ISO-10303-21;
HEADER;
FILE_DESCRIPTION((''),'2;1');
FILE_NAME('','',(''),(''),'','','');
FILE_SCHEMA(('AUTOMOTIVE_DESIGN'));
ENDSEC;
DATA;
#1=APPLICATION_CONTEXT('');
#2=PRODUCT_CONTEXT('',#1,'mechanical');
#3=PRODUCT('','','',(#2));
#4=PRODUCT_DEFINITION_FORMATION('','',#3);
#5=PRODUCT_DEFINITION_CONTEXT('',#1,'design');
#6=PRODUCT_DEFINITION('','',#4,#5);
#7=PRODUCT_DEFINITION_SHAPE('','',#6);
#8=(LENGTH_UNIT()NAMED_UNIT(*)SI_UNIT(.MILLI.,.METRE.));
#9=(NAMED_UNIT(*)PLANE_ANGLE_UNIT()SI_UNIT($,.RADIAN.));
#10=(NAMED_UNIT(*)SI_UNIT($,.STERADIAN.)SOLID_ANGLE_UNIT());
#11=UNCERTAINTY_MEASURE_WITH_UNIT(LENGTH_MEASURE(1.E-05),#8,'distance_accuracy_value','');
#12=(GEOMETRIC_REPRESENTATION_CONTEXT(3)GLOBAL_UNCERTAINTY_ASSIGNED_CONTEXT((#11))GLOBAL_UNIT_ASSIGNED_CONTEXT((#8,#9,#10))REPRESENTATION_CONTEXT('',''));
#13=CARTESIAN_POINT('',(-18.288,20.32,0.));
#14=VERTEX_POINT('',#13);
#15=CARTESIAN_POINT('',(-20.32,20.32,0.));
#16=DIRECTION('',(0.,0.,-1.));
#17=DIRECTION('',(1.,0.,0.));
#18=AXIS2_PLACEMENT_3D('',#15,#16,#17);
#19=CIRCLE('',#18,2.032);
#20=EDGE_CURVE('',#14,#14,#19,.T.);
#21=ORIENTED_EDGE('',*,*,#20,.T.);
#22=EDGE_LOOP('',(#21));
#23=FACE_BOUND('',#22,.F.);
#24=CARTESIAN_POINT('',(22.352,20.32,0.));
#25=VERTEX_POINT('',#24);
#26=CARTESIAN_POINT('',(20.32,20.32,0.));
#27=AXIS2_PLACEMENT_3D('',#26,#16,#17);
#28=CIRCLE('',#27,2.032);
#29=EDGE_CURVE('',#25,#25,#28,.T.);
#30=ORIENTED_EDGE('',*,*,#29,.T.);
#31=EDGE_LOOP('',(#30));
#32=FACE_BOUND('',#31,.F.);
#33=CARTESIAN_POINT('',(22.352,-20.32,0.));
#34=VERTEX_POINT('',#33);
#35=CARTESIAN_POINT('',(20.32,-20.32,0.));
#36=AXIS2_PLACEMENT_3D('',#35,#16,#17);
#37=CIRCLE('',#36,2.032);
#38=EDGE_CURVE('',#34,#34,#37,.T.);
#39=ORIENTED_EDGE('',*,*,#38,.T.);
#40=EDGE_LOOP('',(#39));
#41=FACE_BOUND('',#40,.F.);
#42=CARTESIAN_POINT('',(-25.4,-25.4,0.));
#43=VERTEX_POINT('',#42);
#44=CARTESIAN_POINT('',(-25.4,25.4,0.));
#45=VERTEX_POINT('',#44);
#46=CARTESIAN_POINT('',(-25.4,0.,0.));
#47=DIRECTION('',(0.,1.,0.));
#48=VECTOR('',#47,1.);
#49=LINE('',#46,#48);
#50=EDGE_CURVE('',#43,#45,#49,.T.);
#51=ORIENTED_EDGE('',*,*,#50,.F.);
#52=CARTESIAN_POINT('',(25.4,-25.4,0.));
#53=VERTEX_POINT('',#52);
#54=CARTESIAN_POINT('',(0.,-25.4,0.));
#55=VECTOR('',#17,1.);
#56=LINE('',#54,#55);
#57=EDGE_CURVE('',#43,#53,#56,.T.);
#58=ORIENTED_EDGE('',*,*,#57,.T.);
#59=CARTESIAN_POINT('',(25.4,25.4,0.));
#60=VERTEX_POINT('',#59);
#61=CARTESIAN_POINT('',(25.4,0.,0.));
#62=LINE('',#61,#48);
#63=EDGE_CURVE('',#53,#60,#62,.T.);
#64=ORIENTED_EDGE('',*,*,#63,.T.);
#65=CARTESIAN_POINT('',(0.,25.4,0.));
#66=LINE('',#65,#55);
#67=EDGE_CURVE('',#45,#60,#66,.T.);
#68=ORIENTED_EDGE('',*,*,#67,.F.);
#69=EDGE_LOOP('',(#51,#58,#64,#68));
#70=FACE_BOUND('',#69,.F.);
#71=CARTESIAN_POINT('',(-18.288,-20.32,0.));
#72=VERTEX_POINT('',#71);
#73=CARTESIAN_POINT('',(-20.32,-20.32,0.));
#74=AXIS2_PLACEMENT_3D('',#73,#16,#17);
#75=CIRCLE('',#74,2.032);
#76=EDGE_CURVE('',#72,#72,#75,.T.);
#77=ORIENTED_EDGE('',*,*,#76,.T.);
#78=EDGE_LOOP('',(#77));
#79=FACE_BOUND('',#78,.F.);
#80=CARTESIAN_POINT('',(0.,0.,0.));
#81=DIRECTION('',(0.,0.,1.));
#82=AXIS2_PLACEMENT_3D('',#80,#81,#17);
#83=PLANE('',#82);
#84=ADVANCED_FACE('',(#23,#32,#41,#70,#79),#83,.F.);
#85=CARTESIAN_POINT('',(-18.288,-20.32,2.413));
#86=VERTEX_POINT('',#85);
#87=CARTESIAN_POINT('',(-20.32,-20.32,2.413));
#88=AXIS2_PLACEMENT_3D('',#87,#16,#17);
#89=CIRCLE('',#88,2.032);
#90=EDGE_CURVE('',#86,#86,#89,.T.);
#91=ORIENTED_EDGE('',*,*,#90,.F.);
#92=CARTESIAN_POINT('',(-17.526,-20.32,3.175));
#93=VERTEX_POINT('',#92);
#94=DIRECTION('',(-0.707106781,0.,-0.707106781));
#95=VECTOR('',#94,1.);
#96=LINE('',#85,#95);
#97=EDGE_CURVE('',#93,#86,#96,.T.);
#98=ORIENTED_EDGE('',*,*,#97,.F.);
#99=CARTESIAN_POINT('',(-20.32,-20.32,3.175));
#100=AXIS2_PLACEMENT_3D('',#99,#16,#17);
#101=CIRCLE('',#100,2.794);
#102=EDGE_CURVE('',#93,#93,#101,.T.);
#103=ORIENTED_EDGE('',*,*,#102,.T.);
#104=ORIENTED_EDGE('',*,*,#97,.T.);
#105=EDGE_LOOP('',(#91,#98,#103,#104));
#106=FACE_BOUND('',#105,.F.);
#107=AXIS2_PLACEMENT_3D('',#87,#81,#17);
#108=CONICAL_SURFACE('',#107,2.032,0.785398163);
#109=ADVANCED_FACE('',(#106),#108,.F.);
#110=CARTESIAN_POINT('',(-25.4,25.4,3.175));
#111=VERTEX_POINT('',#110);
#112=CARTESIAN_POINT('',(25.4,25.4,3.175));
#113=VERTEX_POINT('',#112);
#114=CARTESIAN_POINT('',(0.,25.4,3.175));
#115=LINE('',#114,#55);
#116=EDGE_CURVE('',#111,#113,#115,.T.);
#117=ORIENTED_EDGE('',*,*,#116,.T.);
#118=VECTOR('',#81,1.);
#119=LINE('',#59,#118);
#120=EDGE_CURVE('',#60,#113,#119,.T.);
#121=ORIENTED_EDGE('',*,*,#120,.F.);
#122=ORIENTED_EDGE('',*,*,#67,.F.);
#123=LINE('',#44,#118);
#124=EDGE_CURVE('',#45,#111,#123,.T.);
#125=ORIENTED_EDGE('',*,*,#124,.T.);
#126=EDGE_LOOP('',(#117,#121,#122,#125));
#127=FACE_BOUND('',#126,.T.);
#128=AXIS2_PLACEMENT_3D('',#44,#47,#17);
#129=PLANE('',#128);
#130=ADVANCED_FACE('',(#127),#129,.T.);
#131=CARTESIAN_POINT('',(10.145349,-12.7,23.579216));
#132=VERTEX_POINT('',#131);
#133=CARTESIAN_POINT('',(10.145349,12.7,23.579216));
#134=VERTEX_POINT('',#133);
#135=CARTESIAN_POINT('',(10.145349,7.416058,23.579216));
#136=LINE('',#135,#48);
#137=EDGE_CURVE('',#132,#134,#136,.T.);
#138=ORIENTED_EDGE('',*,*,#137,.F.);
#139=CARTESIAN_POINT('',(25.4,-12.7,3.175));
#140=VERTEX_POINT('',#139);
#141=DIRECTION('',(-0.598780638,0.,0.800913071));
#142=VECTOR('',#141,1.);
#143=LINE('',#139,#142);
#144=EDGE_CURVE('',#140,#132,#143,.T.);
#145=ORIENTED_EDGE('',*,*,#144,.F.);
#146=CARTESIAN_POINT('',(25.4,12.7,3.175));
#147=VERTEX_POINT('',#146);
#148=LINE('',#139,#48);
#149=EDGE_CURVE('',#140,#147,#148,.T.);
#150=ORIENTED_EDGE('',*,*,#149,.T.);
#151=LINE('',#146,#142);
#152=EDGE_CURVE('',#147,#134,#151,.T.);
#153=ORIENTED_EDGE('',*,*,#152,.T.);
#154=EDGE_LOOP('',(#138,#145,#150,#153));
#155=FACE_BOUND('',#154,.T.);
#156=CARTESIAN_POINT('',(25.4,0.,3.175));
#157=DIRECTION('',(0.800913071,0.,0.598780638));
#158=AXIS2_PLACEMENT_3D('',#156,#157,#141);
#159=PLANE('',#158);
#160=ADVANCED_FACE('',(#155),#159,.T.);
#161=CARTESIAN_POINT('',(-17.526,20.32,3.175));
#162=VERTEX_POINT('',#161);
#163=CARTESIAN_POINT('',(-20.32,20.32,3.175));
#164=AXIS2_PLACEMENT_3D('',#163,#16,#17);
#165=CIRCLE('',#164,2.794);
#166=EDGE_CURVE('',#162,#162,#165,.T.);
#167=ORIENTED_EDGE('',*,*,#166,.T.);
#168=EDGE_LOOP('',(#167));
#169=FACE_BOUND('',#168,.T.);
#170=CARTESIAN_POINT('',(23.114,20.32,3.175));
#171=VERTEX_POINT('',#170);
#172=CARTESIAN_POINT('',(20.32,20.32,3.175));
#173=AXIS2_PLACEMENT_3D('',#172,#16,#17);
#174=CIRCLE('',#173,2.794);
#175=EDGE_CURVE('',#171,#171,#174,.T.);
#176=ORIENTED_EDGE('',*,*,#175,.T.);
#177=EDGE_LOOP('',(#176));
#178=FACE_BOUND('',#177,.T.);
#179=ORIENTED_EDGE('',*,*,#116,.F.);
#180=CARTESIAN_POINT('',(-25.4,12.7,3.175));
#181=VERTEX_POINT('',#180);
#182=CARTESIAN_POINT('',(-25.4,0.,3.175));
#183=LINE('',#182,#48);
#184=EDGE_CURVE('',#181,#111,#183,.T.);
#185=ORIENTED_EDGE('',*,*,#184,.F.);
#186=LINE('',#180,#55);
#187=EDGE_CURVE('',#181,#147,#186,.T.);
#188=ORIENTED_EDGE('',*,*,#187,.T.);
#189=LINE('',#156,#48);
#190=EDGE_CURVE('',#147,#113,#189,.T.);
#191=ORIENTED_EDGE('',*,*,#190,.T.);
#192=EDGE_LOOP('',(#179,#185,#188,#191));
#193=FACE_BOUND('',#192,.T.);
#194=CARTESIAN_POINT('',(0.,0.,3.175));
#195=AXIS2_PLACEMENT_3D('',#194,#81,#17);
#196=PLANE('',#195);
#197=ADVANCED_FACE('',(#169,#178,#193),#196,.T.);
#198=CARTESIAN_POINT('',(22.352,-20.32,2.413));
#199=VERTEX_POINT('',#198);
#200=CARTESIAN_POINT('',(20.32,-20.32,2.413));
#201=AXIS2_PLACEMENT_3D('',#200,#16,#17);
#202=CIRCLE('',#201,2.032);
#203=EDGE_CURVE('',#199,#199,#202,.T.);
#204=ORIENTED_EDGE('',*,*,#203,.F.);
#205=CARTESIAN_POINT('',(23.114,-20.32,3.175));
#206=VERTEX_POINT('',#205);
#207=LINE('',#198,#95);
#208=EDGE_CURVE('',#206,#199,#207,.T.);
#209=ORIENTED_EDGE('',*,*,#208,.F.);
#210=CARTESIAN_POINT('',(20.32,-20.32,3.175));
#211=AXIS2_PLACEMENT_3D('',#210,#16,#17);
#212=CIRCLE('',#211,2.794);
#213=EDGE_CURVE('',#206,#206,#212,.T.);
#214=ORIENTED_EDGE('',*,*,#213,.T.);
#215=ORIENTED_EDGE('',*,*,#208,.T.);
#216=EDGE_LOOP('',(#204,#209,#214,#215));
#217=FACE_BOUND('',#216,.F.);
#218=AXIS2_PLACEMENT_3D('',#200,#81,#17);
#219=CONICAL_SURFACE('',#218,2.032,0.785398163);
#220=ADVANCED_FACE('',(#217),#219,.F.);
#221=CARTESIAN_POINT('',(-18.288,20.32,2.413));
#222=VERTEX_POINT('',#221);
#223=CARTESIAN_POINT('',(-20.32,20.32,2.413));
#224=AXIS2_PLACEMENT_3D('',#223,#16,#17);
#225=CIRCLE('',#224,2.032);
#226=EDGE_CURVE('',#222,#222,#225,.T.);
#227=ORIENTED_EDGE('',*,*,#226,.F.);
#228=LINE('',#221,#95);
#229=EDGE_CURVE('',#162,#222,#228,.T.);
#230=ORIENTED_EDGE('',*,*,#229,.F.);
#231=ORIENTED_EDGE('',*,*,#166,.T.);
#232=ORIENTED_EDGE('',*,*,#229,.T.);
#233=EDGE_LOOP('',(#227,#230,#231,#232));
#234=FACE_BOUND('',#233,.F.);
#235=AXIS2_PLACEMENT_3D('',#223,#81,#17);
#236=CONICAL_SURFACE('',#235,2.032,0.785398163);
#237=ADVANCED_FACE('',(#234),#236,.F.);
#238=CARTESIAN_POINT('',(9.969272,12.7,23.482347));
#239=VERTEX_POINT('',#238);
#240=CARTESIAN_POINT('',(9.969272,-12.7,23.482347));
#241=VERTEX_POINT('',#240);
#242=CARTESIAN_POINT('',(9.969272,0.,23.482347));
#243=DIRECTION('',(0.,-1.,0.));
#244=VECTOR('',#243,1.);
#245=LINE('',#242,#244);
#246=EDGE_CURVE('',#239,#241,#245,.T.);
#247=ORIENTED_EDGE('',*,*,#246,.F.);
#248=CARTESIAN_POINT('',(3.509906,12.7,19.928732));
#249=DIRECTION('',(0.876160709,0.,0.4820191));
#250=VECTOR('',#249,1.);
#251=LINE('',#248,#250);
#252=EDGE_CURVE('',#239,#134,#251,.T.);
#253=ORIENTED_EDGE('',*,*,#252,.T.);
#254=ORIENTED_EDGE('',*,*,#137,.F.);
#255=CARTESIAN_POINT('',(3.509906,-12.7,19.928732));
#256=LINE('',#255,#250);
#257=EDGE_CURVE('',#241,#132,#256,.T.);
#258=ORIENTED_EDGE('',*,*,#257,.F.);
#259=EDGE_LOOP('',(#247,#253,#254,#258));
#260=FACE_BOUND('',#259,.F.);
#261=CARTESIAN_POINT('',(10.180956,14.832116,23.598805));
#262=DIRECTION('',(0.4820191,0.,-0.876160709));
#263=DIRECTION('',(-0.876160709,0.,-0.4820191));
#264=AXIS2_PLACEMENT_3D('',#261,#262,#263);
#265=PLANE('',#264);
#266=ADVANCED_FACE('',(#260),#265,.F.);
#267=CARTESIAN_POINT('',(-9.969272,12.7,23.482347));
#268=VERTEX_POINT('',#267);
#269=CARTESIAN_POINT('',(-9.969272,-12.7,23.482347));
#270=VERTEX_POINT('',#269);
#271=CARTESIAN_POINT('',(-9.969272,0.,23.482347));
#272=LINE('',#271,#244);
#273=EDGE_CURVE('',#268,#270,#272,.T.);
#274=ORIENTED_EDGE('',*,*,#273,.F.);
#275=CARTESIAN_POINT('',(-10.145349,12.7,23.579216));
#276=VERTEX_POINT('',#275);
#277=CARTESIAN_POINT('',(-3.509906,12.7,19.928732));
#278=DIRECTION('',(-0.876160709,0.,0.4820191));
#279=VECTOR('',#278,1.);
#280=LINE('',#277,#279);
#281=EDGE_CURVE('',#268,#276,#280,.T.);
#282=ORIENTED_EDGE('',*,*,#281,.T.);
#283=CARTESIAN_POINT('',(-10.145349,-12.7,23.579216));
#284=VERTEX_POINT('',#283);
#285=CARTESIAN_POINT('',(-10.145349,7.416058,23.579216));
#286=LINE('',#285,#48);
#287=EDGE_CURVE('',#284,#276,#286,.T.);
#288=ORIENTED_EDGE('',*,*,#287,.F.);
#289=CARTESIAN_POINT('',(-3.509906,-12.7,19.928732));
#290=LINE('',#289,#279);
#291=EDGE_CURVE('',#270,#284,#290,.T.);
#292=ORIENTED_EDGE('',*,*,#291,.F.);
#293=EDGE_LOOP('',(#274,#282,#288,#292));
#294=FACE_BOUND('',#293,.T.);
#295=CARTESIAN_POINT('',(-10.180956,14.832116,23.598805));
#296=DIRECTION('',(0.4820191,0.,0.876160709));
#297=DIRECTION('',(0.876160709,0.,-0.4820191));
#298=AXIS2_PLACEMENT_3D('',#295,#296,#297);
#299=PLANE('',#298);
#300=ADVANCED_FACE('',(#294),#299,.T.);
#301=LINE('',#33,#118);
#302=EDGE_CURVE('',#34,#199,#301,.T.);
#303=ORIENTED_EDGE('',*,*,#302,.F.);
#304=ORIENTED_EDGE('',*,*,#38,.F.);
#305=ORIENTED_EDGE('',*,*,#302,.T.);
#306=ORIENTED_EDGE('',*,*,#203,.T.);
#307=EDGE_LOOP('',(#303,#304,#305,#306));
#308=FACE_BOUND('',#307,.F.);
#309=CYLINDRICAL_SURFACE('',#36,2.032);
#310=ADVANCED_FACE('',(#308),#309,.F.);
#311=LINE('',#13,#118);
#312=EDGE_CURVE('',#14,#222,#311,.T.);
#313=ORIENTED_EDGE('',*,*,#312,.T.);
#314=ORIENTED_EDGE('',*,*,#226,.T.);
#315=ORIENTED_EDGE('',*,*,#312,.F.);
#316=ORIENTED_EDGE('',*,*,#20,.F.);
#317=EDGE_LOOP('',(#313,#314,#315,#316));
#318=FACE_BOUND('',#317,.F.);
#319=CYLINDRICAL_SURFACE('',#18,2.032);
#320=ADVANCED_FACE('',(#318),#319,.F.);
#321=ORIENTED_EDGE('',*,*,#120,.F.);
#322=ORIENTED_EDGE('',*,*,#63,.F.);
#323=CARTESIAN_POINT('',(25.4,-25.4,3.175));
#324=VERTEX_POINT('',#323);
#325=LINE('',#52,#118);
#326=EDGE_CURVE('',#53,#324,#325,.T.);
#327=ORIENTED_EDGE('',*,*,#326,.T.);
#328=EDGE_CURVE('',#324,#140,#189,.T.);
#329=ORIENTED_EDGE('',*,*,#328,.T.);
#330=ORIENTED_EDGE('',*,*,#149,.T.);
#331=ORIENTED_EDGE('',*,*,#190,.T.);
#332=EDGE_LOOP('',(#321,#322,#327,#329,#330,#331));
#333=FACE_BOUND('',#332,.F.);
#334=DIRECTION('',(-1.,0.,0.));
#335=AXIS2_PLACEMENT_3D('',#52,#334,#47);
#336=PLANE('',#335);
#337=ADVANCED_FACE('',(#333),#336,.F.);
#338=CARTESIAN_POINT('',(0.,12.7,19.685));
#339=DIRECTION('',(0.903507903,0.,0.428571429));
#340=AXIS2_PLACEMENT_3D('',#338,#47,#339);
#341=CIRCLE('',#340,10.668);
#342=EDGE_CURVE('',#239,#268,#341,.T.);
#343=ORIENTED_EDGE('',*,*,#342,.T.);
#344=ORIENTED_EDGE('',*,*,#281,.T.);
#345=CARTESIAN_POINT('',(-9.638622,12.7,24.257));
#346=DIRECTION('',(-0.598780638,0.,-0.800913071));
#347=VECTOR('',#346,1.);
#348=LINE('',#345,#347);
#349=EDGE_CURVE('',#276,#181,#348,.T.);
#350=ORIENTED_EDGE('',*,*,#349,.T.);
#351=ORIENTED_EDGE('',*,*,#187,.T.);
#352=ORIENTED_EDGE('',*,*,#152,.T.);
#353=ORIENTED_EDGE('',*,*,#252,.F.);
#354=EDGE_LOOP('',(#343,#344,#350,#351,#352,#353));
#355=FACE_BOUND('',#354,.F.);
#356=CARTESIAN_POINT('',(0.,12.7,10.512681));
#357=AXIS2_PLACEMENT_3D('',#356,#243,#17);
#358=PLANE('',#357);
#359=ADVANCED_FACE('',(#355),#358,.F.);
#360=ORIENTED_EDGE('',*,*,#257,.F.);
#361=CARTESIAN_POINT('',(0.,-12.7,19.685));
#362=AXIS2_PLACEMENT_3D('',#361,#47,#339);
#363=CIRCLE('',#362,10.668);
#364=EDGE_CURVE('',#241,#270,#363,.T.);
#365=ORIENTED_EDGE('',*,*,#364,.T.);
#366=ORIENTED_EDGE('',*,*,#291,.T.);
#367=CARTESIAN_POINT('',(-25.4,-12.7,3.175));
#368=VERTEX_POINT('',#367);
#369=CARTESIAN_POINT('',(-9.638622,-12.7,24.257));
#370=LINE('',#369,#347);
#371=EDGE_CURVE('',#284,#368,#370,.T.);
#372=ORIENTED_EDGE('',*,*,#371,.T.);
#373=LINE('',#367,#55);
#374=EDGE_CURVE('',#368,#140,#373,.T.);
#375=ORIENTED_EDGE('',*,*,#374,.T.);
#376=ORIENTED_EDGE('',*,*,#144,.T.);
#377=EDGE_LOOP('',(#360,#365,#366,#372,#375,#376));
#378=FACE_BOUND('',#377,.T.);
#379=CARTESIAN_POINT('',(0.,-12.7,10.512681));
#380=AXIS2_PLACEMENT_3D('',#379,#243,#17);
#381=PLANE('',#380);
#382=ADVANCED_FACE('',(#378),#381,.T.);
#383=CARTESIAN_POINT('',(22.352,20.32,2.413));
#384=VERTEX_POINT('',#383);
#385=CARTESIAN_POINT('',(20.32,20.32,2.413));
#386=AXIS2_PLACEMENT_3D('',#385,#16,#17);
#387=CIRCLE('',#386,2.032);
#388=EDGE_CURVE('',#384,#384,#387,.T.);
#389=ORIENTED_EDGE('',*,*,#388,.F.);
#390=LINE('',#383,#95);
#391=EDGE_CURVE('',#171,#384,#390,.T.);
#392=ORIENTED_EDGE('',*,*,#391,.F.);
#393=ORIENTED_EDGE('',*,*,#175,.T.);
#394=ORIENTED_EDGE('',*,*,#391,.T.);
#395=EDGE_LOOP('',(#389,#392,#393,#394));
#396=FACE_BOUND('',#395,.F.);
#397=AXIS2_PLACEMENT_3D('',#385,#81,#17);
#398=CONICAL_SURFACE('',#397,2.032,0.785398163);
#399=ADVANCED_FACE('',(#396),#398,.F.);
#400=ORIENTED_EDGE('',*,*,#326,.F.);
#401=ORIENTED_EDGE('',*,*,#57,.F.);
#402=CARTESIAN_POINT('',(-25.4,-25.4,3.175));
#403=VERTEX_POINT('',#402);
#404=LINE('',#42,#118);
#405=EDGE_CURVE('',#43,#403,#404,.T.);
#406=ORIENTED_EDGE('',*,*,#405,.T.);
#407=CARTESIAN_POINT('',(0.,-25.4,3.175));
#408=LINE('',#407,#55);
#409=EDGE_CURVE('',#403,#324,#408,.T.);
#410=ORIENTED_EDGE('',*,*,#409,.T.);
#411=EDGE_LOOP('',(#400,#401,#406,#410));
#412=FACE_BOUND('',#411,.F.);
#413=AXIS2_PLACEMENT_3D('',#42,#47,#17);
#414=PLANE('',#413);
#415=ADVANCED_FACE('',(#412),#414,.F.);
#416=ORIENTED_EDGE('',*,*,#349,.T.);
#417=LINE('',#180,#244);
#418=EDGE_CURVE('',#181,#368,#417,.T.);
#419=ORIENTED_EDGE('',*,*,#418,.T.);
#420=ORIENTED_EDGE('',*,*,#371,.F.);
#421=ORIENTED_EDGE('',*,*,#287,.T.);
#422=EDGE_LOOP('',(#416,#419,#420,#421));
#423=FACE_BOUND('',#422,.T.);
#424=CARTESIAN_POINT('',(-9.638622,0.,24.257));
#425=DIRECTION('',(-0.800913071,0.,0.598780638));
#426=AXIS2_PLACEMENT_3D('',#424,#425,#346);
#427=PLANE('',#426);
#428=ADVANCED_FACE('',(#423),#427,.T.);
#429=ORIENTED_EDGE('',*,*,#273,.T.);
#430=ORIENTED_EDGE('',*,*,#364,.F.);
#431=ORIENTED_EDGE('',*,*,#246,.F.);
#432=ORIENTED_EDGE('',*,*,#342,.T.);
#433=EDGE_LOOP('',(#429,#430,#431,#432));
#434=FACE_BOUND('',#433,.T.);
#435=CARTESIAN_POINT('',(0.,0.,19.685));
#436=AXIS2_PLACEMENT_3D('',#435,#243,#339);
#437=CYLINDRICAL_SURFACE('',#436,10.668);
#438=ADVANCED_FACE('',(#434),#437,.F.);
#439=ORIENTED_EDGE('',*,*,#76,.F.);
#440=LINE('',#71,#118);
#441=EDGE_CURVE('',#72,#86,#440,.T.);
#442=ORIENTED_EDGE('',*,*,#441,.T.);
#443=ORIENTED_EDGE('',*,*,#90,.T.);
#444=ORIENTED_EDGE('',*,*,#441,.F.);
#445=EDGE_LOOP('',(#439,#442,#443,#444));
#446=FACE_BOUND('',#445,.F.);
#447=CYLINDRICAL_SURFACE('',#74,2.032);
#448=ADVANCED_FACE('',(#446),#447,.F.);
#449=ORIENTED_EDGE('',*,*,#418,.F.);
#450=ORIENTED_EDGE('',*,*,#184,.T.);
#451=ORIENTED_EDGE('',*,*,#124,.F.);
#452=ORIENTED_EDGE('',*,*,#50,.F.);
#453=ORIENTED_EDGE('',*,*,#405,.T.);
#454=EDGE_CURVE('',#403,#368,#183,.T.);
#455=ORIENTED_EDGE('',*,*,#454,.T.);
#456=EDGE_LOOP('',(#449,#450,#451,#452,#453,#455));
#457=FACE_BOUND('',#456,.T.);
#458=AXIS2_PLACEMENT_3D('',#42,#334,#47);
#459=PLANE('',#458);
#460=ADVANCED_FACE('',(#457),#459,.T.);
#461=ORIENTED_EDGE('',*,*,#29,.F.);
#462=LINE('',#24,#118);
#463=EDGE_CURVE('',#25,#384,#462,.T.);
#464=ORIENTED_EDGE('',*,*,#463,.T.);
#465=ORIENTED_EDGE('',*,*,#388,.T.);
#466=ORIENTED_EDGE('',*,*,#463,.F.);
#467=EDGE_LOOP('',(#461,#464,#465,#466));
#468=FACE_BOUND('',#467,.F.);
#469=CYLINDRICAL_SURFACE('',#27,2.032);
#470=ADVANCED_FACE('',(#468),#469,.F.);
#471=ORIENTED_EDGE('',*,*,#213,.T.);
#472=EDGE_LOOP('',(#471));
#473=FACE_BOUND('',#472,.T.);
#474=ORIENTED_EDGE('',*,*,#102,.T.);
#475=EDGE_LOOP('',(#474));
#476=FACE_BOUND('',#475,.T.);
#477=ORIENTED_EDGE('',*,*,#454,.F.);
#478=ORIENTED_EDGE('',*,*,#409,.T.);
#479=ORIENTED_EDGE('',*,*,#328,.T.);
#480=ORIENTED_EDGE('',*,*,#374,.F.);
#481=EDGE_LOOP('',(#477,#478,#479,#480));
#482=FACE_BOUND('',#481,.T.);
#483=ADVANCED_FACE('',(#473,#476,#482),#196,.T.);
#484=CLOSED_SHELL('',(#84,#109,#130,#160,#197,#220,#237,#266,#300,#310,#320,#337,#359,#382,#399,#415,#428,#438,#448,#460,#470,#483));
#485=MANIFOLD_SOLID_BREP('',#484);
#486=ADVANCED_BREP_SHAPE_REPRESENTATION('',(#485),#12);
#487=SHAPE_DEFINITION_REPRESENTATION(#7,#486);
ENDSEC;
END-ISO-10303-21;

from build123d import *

# Parameters (mm, degrees)
F0_W        = 50.8
F0_H        = 50.8
F1_DEPTH    = 3.175
F3_DEPTH    = 12.7
F4_T1_DEPTH = 29.6642315955
F5_R        = 2.032
F6_DEPTH    = 25.4
F7_SIZE     = 0.762


# Not quite as in the source:
# - a fillet or chamfer that OpenCascade refuses, or shapes differently, is made with other operations: its cross-section is extruded or revolved along the edge and cut away or added


with BuildPart() as f1:
    # F0 (on Top) → F1 (new body)
    with BuildSketch(Plane.XY):
        Rectangle(F0_W, F0_H)
    extrude(amount=F1_DEPTH)

    # F2 (on Front) → F3 (join, symmetric)
    with BuildSketch(Plane.XZ):
        with BuildLine():
            ThreePointArc((9.6386223082, 24.257), (0, 9.017), (-9.6386223082, 24.257))
            Line((-9.6386223082, 24.257), (-25.4, 3.175))
            Line((-25.4, 3.175), (25.4, 3.175))
            Line((25.4, 3.175), (9.6386223082, 24.257))
        make_face()
    extrude(amount=F3_DEPTH, both=True)

    # F4: chamfer of 1.016 on 2 edges, made by hand

    # F4_s2 → F4_t1 (cut)
    with BuildSketch(Plane.XZ.offset(-14.8321157977)):
        with BuildLine():
            Line((-10.1809562751, 23.5988049587), (-9.9336646357, 23.4627576649))
            Line((-9.9336646357, 23.4627576649), (-9.9146755466, 23.4555246232))
            ThreePointArc((-9.9146755466, 23.4555246232), (-9.7936995215, 23.8631023282), (-9.6202630276, 24.2482914286))
            Line((-9.6202630276, 24.2482914286), (-9.6548968618, 24.2691672226))
            ThreePointArc((-9.6548968618, 24.2691672226), (-9.9099463042, 23.9280198655), (-10.1972308287, 23.6109721813))
            Line((-10.1972308287, 23.6109721813), (-10.1809562751, 23.5988049587))
        make_face()
        with BuildLine():
            Line((10.1809562751, 23.5988049587), (9.9336646357, 23.4627576649))
            Line((9.9336646357, 23.4627576649), (9.9146755466, 23.4555246232))
            ThreePointArc((9.9146755466, 23.4555246232), (9.7936995215, 23.8631023282), (9.6202630276, 24.2482914286))
            Line((9.6202630276, 24.2482914286), (9.6548968618, 24.2691672226))
            ThreePointArc((9.6548968618, 24.2691672226), (9.9099463042, 23.9280198655), (10.1972308287, 23.6109721813))
            Line((10.1972308287, 23.6109721813), (10.1809562751, 23.5988049587))
        make_face()
    extrude(amount=F4_T1_DEPTH, mode=Mode.SUBTRACT)

    # F5 (on face) → F6 (cut)
    with BuildSketch(Plane(origin=(0, 0, 0), x_dir=(1, 0, 0), z_dir=(0, 0, -1))):
        with Locations((-20.32, 20.32)):
            Circle(F5_R)
        with Locations((-20.32, -20.32)):
            Circle(F5_R)
        with Locations((20.32, 20.32)):
            Circle(F5_R)
        with Locations((20.32, -20.32)):
            Circle(F5_R)
    extrude(amount=-F6_DEPTH, mode=Mode.SUBTRACT)

    # F7
    f7_edges = [f1.edges().sort_by_distance(p)[0] for p in [
        (-22.352, -20.32, 3.175),
        (-22.352, 20.32, 3.175),
        (18.288, 20.32, 3.175),
        (18.288, -20.32, 3.175),
    ]]
    chamfer(f7_edges, length=F7_SIZE)


solid = f1.part
